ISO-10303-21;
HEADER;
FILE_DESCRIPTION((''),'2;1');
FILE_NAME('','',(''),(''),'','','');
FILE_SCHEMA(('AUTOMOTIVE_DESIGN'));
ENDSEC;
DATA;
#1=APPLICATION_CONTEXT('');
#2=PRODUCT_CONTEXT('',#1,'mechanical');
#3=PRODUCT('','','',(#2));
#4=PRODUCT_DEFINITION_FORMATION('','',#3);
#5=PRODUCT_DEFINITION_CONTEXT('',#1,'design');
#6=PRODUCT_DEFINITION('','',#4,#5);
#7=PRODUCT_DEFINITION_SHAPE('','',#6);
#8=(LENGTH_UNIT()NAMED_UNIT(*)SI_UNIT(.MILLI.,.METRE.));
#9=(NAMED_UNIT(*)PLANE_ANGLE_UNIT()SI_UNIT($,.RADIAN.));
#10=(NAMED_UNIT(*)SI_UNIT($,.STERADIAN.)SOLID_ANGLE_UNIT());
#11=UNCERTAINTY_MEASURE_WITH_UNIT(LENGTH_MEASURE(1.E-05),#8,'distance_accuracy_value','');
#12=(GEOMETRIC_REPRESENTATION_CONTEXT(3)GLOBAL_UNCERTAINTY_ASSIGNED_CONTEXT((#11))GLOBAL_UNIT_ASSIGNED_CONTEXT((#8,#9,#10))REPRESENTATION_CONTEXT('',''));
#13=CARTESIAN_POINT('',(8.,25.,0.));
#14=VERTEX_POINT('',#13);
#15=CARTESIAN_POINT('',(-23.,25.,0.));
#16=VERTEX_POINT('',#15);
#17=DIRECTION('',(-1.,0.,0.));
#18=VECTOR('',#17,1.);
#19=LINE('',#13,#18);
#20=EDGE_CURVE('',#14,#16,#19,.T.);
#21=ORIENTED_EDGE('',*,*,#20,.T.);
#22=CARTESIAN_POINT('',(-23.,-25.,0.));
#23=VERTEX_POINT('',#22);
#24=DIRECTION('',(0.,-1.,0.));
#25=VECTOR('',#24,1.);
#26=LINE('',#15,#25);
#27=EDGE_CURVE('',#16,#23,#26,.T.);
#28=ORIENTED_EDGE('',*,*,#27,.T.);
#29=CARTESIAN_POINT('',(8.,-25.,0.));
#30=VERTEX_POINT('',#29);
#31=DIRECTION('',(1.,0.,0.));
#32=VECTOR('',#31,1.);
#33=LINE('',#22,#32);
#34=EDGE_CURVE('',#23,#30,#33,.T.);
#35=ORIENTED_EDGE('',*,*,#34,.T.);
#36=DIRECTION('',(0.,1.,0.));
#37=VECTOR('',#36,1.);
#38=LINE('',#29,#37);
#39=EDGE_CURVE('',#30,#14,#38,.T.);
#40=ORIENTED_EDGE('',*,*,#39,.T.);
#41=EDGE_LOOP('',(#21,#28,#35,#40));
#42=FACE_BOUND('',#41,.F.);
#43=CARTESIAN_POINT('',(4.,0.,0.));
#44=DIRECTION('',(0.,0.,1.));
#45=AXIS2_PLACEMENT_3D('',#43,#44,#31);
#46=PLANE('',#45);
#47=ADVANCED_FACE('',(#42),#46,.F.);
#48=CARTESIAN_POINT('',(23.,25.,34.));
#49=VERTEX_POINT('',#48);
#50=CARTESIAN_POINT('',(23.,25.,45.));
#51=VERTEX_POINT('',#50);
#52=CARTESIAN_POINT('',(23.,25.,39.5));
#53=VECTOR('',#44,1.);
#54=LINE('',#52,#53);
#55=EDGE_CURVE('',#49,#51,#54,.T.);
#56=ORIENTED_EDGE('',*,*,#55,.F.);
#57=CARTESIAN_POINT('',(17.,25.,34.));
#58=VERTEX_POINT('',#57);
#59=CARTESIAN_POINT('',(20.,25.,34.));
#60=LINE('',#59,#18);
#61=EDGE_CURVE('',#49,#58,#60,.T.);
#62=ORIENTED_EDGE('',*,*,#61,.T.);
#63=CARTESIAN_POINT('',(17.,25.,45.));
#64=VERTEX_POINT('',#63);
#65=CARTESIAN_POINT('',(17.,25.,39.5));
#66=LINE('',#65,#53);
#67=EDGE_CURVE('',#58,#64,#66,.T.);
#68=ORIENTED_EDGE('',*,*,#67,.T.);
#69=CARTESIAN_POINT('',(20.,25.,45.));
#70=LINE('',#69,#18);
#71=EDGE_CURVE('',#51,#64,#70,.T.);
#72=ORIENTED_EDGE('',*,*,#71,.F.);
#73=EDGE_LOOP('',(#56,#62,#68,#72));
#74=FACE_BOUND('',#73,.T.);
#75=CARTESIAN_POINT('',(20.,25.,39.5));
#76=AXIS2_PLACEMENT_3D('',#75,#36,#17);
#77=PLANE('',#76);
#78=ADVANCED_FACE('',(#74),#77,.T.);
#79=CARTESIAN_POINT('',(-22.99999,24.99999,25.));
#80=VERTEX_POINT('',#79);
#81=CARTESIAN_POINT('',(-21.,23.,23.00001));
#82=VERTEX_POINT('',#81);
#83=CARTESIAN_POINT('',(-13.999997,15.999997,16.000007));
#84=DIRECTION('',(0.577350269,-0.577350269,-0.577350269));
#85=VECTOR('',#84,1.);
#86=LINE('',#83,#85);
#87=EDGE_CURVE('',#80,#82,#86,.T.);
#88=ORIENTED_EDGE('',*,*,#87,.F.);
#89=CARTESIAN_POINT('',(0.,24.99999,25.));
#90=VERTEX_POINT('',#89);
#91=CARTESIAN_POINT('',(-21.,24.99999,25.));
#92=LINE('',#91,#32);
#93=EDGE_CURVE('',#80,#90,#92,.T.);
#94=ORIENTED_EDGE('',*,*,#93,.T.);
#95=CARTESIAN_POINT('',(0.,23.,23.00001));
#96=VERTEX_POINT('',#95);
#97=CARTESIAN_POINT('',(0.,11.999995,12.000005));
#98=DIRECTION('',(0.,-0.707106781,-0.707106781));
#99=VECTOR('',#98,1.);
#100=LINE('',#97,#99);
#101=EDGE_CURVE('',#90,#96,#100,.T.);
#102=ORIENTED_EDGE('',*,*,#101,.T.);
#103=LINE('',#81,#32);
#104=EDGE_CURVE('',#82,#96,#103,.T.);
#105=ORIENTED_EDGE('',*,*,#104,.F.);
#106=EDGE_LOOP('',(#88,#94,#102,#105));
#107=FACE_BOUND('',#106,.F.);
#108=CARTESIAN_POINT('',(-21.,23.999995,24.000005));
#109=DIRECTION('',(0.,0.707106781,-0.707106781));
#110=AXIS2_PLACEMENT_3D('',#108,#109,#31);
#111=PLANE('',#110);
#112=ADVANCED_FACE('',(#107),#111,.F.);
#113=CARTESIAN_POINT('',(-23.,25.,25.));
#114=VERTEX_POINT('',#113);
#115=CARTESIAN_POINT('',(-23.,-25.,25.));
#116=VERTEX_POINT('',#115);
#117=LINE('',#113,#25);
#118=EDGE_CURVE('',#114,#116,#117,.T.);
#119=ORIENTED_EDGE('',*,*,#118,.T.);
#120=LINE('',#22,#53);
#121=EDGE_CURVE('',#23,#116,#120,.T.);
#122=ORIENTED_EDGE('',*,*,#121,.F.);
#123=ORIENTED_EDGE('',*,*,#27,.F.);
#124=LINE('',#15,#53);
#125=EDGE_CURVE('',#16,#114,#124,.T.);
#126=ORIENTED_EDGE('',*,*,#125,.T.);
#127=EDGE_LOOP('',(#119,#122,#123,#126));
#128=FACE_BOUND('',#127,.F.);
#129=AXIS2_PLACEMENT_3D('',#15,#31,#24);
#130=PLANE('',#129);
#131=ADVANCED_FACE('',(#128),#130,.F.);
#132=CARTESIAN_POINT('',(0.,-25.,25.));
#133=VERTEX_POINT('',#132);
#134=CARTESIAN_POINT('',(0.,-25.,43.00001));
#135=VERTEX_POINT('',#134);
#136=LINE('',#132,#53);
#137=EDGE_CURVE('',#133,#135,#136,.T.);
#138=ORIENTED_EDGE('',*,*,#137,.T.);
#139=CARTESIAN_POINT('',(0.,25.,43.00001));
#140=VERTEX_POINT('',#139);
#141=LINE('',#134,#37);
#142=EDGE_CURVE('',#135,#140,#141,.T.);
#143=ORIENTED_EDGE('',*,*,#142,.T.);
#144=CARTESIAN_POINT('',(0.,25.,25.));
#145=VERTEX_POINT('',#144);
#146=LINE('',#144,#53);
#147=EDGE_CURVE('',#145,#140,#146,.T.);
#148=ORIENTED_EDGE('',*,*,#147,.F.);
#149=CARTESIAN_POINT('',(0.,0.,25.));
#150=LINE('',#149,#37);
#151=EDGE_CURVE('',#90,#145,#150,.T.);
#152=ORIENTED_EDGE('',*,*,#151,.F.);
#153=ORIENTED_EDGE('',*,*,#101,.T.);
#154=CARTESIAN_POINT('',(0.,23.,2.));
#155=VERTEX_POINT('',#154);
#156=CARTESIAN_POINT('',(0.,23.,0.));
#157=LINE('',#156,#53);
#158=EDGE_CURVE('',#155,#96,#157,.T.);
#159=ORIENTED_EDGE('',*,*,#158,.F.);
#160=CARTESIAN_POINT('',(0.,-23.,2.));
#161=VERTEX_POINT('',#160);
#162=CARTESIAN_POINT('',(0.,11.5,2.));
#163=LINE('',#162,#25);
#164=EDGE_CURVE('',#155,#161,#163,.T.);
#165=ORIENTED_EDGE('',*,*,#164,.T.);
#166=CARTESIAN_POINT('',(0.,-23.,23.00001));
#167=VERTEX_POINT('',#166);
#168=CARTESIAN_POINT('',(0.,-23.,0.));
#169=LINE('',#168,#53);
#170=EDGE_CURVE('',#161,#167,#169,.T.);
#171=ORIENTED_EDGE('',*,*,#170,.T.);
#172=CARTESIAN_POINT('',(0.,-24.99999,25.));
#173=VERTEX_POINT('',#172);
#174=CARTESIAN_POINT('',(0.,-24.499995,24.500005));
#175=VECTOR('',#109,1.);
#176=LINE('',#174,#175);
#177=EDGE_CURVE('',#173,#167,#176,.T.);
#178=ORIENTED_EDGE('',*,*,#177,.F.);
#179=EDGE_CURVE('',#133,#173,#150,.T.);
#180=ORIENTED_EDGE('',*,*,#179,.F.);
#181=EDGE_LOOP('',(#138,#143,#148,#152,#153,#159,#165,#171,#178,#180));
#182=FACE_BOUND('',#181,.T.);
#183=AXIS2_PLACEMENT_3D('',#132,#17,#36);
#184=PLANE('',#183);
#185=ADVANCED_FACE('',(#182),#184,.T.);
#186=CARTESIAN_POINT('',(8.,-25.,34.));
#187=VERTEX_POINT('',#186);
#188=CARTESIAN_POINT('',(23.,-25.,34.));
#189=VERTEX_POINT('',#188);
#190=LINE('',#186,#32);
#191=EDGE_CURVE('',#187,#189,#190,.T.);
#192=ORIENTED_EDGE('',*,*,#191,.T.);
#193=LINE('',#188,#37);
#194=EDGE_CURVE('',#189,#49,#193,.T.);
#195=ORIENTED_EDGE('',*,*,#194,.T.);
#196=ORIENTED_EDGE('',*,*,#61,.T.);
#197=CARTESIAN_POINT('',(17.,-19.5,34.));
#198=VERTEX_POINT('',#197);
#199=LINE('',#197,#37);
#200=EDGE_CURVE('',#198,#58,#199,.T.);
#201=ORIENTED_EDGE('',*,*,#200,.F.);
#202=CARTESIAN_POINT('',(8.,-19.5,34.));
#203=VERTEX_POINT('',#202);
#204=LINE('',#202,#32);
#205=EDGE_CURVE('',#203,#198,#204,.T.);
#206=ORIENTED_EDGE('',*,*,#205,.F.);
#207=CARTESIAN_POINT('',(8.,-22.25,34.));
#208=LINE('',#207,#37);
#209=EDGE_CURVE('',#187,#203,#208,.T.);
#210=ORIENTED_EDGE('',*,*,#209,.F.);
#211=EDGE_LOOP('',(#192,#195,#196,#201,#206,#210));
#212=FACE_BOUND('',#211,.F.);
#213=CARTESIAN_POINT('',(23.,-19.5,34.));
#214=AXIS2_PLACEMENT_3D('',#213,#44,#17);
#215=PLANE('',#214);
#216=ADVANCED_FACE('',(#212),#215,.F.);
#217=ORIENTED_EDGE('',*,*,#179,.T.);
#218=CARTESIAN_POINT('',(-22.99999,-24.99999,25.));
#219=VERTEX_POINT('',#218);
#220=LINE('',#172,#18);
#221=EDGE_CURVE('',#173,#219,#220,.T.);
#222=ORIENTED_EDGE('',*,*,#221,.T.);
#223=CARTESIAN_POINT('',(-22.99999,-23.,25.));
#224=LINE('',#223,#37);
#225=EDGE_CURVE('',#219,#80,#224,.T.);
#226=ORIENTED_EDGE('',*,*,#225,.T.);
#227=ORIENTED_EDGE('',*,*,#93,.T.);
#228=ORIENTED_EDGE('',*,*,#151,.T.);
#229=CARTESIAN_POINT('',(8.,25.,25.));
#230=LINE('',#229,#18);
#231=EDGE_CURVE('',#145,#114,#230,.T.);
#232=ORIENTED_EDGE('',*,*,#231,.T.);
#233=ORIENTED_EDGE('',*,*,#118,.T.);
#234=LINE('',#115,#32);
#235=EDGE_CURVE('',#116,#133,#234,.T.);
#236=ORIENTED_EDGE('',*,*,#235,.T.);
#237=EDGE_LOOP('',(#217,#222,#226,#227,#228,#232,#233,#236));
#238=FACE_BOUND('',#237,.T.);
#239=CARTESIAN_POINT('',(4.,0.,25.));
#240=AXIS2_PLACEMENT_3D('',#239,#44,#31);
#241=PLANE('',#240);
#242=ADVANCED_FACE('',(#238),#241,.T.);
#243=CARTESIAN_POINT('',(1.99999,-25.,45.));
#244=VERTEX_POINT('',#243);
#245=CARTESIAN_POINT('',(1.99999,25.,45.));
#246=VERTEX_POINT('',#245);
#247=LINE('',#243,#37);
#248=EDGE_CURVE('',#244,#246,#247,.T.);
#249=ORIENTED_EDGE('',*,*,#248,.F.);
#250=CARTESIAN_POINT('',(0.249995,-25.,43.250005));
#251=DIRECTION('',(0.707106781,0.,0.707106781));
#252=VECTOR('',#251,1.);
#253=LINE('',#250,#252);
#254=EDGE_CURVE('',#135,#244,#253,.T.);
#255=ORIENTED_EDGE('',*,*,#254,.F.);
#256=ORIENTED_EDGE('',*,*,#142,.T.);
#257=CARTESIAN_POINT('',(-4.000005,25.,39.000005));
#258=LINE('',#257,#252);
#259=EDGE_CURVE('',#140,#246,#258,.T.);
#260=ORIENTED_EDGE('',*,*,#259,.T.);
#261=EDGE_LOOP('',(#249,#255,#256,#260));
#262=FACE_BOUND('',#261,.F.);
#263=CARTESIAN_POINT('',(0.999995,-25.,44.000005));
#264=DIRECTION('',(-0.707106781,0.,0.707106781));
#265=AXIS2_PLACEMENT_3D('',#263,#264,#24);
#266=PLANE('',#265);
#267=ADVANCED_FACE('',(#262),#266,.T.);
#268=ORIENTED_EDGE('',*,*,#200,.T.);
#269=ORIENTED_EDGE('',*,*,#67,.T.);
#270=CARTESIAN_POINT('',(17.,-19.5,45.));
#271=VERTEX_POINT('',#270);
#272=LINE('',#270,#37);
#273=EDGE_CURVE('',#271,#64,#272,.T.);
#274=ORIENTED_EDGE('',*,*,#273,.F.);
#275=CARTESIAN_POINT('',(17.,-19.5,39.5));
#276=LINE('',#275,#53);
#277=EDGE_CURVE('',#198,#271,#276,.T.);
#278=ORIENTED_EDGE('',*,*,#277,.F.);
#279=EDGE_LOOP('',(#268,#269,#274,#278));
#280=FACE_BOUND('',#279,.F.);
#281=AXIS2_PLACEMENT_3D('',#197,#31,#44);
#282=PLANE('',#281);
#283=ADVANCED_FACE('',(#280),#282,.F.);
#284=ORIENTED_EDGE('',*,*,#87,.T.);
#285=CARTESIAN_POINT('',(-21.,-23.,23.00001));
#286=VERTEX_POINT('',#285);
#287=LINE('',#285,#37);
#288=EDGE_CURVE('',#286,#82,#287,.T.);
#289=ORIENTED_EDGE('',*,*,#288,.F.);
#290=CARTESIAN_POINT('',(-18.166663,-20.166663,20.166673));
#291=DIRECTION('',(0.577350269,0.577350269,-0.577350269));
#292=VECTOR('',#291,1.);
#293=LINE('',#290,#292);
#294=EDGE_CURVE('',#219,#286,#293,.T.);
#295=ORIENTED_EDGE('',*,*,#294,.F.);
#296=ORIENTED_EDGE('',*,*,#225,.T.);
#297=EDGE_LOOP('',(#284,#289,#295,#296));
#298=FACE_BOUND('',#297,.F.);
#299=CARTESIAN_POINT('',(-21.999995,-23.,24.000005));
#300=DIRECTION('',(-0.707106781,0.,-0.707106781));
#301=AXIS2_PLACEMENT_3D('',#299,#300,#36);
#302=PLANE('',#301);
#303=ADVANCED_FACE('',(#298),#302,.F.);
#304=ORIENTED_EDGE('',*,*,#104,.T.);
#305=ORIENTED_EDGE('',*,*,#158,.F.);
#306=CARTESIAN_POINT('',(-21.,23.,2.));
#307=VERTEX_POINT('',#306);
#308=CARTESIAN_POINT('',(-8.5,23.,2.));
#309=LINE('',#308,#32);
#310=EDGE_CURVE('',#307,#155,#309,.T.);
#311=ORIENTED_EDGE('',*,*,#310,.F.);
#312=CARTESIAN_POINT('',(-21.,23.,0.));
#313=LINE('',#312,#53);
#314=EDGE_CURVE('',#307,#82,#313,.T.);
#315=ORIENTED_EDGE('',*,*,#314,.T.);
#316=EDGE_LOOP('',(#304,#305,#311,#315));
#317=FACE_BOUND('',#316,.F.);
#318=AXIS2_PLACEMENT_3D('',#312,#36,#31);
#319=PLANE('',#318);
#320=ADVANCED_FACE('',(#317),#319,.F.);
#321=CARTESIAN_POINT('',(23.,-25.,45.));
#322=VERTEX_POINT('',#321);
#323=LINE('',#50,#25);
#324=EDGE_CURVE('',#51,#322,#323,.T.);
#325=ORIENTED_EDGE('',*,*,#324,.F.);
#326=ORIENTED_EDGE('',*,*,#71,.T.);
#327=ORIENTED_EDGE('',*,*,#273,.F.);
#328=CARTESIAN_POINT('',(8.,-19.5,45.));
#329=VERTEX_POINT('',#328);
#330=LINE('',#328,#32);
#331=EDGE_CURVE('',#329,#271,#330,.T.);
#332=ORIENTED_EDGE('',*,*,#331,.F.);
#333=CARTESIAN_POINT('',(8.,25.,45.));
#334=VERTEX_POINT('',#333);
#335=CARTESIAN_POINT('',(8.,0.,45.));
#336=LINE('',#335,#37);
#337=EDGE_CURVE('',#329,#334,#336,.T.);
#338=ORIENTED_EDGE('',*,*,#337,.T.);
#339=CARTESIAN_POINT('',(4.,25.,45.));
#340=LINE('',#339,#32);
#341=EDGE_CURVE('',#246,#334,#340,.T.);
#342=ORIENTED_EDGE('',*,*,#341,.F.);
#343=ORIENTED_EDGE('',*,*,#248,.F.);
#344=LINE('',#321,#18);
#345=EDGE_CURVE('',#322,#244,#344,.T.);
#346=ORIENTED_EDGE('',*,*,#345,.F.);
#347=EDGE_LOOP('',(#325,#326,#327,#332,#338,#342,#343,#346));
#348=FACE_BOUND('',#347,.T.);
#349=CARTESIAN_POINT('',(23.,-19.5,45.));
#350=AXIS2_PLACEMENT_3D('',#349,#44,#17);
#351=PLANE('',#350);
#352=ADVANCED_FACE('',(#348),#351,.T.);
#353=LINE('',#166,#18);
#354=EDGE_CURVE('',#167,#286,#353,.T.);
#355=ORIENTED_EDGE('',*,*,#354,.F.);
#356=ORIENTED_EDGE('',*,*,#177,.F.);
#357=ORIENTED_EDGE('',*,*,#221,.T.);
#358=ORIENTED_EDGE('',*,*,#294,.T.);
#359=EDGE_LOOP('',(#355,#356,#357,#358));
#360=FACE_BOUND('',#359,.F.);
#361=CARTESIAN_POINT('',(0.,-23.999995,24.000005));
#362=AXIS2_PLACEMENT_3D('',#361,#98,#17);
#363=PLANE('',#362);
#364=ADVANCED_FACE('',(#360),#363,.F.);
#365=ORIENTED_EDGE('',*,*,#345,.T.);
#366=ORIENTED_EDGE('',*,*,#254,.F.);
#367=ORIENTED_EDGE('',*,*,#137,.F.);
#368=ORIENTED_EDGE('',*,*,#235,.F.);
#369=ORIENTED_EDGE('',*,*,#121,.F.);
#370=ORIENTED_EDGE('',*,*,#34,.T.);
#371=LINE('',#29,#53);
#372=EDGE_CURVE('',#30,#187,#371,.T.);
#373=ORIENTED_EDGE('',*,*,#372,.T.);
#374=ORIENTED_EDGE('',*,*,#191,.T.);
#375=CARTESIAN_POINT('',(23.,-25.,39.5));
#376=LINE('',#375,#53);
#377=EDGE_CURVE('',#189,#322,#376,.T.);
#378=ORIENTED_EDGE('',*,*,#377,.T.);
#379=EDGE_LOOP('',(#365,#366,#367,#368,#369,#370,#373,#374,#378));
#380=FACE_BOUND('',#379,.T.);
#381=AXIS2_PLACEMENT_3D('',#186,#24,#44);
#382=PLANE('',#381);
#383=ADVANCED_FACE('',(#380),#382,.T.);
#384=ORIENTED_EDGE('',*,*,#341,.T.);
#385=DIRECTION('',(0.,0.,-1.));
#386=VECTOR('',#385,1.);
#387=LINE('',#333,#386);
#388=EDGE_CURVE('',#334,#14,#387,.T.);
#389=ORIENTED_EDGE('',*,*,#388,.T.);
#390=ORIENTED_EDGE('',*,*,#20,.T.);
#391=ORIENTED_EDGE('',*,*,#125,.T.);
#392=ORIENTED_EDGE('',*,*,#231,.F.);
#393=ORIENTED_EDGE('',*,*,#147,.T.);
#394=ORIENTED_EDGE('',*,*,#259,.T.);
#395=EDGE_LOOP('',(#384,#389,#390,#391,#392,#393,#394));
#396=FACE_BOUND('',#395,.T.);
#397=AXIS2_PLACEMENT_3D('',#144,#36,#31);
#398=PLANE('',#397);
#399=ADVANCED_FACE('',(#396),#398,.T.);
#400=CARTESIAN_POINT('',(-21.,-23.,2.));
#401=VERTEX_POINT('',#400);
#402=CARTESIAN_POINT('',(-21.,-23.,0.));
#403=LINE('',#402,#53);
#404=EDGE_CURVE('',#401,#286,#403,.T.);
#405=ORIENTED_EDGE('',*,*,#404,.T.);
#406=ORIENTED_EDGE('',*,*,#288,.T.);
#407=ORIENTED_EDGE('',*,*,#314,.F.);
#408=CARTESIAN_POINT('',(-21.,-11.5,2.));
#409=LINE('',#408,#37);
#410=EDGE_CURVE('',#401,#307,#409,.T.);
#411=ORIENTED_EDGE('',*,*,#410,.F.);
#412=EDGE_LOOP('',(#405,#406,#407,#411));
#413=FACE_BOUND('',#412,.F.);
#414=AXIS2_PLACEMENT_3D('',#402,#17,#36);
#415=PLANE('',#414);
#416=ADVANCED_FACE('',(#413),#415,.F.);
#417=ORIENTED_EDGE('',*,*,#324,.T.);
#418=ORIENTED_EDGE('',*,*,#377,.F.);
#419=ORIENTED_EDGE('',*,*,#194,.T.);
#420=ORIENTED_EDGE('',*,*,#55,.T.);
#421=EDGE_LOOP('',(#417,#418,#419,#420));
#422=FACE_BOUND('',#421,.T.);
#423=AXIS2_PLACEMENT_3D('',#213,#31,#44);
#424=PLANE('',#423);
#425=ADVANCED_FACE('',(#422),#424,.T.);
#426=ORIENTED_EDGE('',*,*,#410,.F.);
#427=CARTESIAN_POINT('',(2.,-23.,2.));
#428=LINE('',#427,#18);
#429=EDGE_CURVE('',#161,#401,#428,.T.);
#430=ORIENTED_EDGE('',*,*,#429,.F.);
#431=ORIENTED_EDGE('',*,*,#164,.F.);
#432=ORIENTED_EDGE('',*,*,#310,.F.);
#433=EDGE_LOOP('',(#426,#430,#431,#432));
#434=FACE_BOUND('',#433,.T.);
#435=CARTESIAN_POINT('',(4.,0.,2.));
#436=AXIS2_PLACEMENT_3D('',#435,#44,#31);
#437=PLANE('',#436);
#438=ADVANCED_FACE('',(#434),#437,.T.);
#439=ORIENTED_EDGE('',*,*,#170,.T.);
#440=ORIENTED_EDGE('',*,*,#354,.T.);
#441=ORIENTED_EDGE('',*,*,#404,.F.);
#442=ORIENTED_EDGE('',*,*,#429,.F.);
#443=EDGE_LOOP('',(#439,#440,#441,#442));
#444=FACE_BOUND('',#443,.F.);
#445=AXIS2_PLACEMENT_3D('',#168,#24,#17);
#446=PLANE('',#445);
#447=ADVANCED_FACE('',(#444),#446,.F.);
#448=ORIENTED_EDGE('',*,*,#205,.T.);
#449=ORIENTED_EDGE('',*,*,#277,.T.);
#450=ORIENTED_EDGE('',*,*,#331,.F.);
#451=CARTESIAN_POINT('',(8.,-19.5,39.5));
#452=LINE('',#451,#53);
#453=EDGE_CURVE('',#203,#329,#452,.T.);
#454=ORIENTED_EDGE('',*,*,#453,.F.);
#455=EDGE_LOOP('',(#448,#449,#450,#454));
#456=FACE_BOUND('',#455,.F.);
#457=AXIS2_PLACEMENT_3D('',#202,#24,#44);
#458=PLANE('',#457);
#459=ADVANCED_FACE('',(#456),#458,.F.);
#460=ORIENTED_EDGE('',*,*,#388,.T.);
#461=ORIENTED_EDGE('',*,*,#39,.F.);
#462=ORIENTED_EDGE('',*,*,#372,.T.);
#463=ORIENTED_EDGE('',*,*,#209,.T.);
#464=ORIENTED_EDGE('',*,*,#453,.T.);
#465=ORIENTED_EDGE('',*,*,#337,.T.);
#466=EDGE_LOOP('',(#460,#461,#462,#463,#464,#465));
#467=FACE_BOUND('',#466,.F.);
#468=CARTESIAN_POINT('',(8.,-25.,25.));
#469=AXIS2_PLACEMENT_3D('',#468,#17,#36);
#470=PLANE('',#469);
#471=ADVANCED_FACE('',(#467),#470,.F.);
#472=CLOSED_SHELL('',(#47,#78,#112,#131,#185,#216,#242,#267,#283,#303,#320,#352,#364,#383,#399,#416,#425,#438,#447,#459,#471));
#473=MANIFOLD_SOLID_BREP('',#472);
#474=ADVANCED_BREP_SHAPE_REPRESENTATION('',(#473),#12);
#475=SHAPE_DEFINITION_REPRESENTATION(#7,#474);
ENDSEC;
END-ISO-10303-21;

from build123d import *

# Parameters (mm, degrees)
F1_DEPTH = 25
F0_W     = 21
F0_H     = 46
F2_DEPTH = 2
F3_W     = 8
F3_H     = 50
F4_DEPTH = 20
F5_W     = 5.5
F5_H     = 11
F6_DEPTH = 15
F7_W     = 6
F7_H     = 11
F8_DEPTH = 44.5
F9_SIZE  = 1.99999


# Not quite as in the source:
# - a fillet or chamfer is up to 0.001 mm smaller than in the source, because OpenCascade refuses the exact size


with BuildPart() as f1:
    # F0 (on Top) → F1 (new body)
    with BuildSketch(Plane.XY):
        Polygon((0, 25), (0, 23), (0, -23), (0, -25), (8, -25), (8, 25), align=None)
        Polygon((-21, 23), (0, 23), (0, 25), (-23, 25), (-23, -25), (0, -25), (0, -23), (-21, -23), align=None)
    extrude(amount=F1_DEPTH)

    # F0 (on Top) → F2 (join)
    with BuildSketch(Plane.XY):
        Polygon((0, 25), (0, 23), (0, -23), (0, -25), (8, -25), (8, 25), align=None)
        with Locations((-10.5, 0)):
            Rectangle(F0_W, F0_H)
        Polygon((-21, 23), (0, 23), (0, 25), (-23, 25), (-23, -25), (0, -25), (0, -23), (-21, -23), align=None)
    extrude(amount=F2_DEPTH)

    # F3 (on face) → F4 (join)
    with BuildSketch(Plane.XY.offset(25)):
        with Locations((4, 0)):
            Rectangle(F3_W, F3_H)
    extrude(amount=F4_DEPTH)

    # F5 (on face) → F6 (join)
    with BuildSketch(Plane.YZ.offset(8)):
        with Locations((-22.25, 39.5)):
            Rectangle(F5_W, F5_H)
    extrude(amount=F6_DEPTH)

    # F7 (on face) → F8 (join, through all)
    with BuildSketch(Plane(origin=(0, -19.5, 0), x_dir=(-1, 0, 0), z_dir=(0, 1, 0))):
        with Locations((-20, 39.5)):
            Rectangle(F7_W, F7_H)
    extrude(amount=F8_DEPTH)

    # F9 (size 2 in the source; OpenCascade refuses exactly that, so slightly less here)
    f9_edges = [f1.edges().sort_by_distance(p)[0] for p in [
        (-10.5, 23, 25),
        (-21, 0, 25),
        (-10.5, -23, 25),
        (0, 0, 45),
    ]]
    chamfer(f9_edges, length=F9_SIZE)


solid = f1.part
